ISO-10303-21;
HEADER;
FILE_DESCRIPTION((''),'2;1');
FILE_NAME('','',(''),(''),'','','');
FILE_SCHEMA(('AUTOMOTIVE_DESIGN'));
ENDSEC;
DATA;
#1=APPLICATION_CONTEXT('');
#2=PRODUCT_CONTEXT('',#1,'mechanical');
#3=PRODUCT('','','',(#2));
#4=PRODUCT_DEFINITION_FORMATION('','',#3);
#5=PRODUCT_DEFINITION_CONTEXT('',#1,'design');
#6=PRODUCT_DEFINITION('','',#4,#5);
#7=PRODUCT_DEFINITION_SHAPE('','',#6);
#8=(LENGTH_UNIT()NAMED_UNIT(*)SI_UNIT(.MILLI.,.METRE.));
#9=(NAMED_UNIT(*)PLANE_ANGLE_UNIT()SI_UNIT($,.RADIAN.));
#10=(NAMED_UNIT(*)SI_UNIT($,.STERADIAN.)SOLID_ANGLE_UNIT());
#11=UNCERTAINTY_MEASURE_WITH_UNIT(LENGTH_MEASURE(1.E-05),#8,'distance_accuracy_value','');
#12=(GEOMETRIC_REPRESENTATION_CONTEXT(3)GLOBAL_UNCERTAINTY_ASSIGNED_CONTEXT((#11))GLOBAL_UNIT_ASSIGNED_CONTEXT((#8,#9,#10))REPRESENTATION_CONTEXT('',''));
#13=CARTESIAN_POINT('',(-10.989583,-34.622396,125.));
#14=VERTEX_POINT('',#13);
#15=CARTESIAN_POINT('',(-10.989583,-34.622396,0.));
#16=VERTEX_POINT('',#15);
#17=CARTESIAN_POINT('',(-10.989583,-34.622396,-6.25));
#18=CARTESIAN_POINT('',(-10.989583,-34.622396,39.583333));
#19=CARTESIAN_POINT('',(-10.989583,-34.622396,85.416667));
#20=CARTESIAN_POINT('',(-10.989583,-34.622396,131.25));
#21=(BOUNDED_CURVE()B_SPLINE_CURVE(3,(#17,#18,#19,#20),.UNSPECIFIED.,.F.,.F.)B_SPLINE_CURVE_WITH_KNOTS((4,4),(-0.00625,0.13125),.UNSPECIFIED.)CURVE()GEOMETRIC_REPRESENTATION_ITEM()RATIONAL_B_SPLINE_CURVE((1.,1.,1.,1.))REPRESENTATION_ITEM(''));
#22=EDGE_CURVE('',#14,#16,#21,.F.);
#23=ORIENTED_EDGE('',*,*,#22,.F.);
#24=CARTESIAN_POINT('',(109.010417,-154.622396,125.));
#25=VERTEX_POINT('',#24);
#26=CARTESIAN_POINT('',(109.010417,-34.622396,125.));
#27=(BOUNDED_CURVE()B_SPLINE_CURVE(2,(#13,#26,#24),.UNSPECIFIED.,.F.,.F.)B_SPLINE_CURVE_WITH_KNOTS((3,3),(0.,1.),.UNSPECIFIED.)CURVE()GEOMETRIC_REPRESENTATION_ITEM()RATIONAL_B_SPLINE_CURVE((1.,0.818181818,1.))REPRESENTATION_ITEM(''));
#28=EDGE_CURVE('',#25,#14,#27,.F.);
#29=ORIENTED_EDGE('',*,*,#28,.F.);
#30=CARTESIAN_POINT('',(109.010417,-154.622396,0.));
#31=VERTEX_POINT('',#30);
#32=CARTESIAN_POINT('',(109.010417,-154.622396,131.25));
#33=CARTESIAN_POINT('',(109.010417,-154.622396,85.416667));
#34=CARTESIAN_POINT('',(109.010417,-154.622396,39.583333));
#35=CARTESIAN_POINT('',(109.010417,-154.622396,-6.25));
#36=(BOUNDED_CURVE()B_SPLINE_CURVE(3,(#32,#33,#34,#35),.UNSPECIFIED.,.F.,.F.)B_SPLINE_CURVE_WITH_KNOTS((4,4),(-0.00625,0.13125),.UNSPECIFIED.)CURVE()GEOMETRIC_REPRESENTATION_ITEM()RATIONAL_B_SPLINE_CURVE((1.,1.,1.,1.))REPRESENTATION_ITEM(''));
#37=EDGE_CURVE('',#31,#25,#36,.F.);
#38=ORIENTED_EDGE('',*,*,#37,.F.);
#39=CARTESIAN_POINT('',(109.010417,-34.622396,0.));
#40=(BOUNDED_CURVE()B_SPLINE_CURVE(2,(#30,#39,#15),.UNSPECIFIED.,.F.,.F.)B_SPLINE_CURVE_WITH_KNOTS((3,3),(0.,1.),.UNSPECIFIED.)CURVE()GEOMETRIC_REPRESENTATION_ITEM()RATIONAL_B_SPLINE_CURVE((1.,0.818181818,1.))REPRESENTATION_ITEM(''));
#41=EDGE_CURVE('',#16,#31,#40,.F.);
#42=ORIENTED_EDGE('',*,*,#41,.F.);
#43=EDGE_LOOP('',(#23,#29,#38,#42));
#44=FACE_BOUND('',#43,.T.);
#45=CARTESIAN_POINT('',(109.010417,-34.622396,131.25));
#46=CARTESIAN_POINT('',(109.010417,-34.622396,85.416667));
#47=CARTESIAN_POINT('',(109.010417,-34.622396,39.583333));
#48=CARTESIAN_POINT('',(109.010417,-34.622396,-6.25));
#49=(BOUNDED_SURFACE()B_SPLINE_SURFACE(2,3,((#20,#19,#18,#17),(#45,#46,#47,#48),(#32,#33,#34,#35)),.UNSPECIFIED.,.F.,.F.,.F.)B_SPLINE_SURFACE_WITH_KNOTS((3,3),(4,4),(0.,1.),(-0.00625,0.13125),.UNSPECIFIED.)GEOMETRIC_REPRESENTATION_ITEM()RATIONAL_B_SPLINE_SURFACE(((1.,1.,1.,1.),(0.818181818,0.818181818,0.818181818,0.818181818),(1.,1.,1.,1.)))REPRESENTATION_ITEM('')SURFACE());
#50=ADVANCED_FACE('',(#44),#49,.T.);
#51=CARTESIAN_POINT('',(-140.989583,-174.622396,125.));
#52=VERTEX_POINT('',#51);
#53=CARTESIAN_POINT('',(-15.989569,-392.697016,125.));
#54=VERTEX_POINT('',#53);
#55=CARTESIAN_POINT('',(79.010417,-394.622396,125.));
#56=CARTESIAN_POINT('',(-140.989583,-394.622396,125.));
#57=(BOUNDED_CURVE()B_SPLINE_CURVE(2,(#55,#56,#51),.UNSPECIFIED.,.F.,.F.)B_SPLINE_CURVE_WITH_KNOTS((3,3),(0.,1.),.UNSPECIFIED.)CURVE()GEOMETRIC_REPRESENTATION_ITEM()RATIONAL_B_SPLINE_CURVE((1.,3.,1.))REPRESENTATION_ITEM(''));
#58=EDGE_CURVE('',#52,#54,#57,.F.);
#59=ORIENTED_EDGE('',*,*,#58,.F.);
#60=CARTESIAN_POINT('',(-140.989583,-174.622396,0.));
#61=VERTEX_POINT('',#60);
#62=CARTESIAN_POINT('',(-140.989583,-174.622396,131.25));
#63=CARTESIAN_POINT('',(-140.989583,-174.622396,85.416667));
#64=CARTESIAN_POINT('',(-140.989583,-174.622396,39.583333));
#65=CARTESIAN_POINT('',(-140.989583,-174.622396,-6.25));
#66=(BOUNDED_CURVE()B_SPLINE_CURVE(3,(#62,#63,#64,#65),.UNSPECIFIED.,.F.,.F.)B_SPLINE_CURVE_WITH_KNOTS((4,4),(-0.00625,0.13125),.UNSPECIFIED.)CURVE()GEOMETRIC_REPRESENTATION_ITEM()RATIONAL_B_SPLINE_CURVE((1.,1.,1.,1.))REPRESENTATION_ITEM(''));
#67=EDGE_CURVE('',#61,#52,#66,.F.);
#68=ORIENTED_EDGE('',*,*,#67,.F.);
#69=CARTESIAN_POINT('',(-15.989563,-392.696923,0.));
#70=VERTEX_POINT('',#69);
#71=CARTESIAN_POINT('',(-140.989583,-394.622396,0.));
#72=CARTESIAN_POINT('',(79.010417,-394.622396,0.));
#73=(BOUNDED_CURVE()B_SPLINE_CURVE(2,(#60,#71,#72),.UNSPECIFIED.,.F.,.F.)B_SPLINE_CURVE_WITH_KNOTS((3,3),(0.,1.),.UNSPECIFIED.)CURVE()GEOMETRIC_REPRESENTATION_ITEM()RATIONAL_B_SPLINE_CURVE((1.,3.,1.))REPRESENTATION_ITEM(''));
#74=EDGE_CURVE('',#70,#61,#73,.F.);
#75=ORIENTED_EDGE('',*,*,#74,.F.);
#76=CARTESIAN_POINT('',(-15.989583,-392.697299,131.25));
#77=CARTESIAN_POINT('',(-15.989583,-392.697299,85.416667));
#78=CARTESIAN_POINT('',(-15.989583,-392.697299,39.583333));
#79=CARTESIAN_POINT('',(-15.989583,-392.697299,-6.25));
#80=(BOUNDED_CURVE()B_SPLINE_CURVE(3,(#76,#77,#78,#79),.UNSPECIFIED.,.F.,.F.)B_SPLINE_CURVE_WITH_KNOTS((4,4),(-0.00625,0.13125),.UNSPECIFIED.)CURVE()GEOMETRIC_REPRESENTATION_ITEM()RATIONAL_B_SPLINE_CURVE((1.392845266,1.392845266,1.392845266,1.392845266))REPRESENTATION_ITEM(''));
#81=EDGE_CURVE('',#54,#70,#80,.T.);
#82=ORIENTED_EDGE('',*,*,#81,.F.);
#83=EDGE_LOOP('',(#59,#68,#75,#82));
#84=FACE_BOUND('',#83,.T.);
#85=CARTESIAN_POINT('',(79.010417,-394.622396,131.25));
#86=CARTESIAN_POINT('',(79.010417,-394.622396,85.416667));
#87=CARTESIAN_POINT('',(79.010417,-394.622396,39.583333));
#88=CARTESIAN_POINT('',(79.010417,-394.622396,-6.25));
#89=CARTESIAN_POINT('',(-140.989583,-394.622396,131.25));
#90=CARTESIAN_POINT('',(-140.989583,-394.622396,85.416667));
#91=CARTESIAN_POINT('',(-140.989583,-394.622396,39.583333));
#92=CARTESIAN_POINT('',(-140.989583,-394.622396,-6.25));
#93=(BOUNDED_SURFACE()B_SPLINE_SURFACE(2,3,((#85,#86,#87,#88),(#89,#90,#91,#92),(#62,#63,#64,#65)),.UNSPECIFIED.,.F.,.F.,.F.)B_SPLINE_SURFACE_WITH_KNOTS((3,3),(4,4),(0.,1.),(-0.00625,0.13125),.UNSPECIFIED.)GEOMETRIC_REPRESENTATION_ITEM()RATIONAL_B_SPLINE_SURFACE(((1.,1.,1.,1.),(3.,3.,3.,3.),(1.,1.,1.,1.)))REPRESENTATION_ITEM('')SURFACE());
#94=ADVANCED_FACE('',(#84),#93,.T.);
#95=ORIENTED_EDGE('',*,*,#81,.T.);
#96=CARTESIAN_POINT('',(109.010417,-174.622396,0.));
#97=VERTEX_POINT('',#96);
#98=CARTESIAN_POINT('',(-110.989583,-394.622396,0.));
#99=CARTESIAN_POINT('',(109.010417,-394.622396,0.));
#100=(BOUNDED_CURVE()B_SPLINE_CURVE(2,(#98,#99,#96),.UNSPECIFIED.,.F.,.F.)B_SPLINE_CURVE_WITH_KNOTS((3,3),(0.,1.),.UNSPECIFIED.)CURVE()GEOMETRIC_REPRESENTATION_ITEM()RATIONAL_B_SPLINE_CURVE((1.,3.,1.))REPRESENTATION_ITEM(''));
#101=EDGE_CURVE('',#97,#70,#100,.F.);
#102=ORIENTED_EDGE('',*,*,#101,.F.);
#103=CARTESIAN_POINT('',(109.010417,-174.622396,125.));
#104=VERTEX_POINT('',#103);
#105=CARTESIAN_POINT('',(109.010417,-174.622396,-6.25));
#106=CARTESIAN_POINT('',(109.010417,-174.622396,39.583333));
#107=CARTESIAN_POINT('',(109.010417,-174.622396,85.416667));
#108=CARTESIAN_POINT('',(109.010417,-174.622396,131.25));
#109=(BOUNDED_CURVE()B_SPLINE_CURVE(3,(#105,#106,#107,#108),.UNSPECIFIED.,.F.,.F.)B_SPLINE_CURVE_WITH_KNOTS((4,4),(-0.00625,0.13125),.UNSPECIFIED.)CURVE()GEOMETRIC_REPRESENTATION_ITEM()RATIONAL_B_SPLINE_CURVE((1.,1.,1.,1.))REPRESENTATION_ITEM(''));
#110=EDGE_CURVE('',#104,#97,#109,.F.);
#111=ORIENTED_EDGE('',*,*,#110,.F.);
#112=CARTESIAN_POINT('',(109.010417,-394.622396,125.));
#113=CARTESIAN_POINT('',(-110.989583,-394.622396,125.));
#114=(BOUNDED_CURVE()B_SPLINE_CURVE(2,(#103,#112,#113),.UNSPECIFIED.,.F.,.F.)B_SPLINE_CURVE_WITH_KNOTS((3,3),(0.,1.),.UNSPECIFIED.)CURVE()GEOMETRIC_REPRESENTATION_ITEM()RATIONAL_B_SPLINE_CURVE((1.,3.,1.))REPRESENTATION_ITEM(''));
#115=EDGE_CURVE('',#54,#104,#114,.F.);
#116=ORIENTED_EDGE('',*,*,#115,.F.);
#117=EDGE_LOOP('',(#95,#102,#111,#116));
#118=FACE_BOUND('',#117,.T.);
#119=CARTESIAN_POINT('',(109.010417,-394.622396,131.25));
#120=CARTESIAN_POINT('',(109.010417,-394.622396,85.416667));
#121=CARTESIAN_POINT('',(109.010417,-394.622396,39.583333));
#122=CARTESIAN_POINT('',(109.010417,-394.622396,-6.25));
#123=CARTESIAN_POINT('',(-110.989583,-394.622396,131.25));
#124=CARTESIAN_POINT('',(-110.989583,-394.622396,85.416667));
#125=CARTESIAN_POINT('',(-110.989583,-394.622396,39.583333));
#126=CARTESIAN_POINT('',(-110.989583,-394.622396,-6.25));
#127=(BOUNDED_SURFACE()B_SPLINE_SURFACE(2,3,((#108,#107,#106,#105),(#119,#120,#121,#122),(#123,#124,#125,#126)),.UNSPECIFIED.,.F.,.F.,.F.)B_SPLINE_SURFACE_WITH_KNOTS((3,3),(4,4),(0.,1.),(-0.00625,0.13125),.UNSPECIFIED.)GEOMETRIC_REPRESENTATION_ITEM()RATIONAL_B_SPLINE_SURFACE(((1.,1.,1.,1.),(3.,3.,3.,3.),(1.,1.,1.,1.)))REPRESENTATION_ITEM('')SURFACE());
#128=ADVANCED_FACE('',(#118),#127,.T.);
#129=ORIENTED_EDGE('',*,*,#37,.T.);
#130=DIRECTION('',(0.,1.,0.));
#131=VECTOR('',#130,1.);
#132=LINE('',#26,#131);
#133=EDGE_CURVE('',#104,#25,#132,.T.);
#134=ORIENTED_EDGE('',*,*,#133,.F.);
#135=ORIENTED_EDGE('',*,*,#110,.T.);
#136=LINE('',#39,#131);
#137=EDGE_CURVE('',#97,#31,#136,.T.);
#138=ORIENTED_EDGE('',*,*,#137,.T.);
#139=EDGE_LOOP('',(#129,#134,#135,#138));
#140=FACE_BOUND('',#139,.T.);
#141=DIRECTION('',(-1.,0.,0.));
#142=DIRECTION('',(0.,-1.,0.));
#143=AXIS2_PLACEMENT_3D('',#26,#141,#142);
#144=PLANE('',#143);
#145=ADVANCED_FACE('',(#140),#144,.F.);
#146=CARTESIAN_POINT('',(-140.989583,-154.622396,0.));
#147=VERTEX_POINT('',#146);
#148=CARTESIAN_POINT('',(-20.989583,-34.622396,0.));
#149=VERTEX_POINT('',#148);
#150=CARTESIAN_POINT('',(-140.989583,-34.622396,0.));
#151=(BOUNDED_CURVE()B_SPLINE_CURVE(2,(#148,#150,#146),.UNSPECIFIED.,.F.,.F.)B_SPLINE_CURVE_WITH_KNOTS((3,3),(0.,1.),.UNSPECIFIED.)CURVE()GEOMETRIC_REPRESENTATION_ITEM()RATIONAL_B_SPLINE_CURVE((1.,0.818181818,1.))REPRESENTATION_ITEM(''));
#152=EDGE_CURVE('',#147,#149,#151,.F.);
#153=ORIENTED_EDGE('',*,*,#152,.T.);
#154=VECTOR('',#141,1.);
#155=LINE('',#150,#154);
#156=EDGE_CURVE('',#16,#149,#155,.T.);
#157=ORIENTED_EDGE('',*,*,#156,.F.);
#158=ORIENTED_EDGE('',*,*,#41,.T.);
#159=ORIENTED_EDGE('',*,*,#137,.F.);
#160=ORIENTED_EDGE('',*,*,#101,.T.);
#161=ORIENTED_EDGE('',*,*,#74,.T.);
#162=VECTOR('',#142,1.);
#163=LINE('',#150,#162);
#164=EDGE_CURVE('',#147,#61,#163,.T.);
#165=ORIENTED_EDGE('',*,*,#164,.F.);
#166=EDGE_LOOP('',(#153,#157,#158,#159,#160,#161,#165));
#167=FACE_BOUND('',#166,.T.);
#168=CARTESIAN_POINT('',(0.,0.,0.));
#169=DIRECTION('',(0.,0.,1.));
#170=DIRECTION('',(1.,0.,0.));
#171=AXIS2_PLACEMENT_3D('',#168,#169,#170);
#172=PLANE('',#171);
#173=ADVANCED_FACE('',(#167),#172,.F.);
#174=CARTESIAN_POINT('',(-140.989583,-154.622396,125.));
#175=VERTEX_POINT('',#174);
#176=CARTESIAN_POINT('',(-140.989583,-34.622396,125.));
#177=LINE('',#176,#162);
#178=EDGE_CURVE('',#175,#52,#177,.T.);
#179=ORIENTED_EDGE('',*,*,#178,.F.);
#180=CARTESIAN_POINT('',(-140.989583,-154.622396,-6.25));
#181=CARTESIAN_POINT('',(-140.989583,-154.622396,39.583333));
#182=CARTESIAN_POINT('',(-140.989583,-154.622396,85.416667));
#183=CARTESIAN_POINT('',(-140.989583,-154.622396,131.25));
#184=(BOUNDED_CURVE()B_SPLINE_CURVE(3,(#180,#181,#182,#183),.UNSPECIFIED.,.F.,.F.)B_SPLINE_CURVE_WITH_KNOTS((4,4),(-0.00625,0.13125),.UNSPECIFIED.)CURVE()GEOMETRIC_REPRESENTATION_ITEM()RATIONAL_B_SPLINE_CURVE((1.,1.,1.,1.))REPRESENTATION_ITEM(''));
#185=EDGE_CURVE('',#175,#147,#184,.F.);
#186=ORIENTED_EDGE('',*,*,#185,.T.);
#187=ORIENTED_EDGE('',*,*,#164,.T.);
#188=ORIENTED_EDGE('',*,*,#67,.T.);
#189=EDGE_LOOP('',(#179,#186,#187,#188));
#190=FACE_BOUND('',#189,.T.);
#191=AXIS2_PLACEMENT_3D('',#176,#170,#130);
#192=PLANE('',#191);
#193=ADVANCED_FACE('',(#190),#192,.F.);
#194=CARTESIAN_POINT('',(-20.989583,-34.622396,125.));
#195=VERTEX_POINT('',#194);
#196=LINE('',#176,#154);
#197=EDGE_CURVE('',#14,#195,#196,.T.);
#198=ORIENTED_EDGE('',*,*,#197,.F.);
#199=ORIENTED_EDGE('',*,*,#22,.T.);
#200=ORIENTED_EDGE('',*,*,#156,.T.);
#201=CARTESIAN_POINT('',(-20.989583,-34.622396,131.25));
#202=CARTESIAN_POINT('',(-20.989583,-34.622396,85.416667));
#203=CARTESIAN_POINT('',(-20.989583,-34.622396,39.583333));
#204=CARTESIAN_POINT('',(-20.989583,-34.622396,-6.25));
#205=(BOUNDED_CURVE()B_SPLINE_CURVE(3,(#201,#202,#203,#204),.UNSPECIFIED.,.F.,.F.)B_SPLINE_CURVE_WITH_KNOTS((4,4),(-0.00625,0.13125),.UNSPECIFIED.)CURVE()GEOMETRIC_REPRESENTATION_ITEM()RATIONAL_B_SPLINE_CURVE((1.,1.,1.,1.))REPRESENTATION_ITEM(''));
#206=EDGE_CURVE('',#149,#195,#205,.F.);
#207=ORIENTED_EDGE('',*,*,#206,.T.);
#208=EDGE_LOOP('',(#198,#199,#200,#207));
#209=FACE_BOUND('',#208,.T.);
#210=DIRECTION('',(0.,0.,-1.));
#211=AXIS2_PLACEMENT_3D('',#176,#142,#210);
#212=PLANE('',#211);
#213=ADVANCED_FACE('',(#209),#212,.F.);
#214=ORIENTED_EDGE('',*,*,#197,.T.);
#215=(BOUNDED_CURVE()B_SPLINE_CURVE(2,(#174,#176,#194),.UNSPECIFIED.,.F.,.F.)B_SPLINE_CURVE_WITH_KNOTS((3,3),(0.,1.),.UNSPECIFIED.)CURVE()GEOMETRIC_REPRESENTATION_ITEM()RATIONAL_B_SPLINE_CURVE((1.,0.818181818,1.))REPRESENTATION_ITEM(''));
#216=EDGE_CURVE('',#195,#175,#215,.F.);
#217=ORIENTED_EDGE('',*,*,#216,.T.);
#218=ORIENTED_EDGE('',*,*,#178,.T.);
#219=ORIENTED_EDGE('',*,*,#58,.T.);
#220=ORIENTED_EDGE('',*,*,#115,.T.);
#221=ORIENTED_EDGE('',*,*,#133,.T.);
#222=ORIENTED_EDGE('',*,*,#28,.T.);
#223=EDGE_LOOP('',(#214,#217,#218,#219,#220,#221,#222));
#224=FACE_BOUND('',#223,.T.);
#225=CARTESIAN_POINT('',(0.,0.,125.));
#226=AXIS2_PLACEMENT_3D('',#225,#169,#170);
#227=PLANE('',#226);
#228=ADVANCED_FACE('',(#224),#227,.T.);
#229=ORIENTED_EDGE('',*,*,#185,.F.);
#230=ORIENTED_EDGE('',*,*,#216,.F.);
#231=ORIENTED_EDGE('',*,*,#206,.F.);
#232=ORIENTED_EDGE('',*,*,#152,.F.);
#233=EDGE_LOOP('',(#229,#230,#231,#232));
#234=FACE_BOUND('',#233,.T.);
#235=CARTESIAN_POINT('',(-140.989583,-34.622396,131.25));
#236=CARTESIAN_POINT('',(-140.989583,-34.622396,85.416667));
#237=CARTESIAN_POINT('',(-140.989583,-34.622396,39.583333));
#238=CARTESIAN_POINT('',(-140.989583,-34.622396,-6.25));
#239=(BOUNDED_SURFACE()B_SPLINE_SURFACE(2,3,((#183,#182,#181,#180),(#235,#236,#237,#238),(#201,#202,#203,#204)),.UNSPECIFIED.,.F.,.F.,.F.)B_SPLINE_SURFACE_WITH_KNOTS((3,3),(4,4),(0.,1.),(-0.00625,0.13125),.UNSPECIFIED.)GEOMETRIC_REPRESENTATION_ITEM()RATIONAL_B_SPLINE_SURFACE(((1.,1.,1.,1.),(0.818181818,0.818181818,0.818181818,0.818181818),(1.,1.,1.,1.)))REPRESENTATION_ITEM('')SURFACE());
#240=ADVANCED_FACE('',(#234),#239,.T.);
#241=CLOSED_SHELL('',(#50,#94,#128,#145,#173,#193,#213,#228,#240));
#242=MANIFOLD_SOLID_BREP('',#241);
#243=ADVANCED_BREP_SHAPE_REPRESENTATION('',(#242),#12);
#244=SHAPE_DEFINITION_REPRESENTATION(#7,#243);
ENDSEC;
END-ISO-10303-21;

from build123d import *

# Parameters (mm, degrees)
SKETCH1_W           = 250
SKETCH1_H           = 360
BOSS_EXTRUDE7_DEPTH = 125
FILLET5_SIZE        = 220
FILLET3_SIZE        = 120


with BuildPart() as part:
    # Sketch1 → Boss-Extrude7 (new body)
    with BuildSketch(Plane.XY):
        with Locations((-15.989583333, -214.622395833)):
            Rectangle(SKETCH1_W, SKETCH1_H)
    extrude(amount=BOSS_EXTRUDE7_DEPTH)

    # Fillet5
    # a fillet whose section is not a circle: 220 mm, written as the material it takes off along each edge
    with BuildSketch(Plane(origin=(109.010416667, -394.622395833, -550), x_dir=(0, 1, 0), z_dir=(0, 0, 1)), Plane(origin=(-140.989583333, -394.622395833, -550), x_dir=(1, 0, 0), z_dir=(0, 0, 1))) as fillet5_piece_1:
        with BuildLine():
            Bezier((FILLET5_SIZE, 0), (0, 0), (0, FILLET5_SIZE), weights=[1, 3, 1])
            Line((0, FILLET5_SIZE), (0, 0))
            Line((0, 0), (FILLET5_SIZE, 0))
        make_face()
    extrude(amount=1225, mode=Mode.SUBTRACT)

    # Fillet3
    # a fillet whose section is not a circle: 120 mm, written as the material it takes off along each edge
    with BuildSketch(Plane(origin=(109.010416667, -34.622395833, -300), x_dir=(-1, 0, 0), z_dir=(0, 0, 1))) as fillet3_piece_1:
        with BuildLine():
            Bezier((FILLET3_SIZE, 0), (0, 0), (0, FILLET3_SIZE), weights=[1, 0.818181818, 1])
            Line((0, FILLET3_SIZE), (0, 0))
            Line((0, 0), (FILLET3_SIZE, 0))
        make_face()
    extrude(amount=725, mode=Mode.SUBTRACT)
    with BuildSketch(Plane(origin=(-140.989583333, -34.622395833, -300), x_dir=(1, 0, 0), z_dir=(0, 0, 1))) as fillet3_piece_2:
        with BuildLine():
            Bezier((FILLET3_SIZE, 0), (0, 0), (0, -FILLET3_SIZE), weights=[1, 0.818181818, 1])
            Line((0, -FILLET3_SIZE), (0, 0))
            Line((0, 0), (FILLET3_SIZE, 0))
        make_face()
    extrude(amount=725, mode=Mode.SUBTRACT)


solid = part.part
